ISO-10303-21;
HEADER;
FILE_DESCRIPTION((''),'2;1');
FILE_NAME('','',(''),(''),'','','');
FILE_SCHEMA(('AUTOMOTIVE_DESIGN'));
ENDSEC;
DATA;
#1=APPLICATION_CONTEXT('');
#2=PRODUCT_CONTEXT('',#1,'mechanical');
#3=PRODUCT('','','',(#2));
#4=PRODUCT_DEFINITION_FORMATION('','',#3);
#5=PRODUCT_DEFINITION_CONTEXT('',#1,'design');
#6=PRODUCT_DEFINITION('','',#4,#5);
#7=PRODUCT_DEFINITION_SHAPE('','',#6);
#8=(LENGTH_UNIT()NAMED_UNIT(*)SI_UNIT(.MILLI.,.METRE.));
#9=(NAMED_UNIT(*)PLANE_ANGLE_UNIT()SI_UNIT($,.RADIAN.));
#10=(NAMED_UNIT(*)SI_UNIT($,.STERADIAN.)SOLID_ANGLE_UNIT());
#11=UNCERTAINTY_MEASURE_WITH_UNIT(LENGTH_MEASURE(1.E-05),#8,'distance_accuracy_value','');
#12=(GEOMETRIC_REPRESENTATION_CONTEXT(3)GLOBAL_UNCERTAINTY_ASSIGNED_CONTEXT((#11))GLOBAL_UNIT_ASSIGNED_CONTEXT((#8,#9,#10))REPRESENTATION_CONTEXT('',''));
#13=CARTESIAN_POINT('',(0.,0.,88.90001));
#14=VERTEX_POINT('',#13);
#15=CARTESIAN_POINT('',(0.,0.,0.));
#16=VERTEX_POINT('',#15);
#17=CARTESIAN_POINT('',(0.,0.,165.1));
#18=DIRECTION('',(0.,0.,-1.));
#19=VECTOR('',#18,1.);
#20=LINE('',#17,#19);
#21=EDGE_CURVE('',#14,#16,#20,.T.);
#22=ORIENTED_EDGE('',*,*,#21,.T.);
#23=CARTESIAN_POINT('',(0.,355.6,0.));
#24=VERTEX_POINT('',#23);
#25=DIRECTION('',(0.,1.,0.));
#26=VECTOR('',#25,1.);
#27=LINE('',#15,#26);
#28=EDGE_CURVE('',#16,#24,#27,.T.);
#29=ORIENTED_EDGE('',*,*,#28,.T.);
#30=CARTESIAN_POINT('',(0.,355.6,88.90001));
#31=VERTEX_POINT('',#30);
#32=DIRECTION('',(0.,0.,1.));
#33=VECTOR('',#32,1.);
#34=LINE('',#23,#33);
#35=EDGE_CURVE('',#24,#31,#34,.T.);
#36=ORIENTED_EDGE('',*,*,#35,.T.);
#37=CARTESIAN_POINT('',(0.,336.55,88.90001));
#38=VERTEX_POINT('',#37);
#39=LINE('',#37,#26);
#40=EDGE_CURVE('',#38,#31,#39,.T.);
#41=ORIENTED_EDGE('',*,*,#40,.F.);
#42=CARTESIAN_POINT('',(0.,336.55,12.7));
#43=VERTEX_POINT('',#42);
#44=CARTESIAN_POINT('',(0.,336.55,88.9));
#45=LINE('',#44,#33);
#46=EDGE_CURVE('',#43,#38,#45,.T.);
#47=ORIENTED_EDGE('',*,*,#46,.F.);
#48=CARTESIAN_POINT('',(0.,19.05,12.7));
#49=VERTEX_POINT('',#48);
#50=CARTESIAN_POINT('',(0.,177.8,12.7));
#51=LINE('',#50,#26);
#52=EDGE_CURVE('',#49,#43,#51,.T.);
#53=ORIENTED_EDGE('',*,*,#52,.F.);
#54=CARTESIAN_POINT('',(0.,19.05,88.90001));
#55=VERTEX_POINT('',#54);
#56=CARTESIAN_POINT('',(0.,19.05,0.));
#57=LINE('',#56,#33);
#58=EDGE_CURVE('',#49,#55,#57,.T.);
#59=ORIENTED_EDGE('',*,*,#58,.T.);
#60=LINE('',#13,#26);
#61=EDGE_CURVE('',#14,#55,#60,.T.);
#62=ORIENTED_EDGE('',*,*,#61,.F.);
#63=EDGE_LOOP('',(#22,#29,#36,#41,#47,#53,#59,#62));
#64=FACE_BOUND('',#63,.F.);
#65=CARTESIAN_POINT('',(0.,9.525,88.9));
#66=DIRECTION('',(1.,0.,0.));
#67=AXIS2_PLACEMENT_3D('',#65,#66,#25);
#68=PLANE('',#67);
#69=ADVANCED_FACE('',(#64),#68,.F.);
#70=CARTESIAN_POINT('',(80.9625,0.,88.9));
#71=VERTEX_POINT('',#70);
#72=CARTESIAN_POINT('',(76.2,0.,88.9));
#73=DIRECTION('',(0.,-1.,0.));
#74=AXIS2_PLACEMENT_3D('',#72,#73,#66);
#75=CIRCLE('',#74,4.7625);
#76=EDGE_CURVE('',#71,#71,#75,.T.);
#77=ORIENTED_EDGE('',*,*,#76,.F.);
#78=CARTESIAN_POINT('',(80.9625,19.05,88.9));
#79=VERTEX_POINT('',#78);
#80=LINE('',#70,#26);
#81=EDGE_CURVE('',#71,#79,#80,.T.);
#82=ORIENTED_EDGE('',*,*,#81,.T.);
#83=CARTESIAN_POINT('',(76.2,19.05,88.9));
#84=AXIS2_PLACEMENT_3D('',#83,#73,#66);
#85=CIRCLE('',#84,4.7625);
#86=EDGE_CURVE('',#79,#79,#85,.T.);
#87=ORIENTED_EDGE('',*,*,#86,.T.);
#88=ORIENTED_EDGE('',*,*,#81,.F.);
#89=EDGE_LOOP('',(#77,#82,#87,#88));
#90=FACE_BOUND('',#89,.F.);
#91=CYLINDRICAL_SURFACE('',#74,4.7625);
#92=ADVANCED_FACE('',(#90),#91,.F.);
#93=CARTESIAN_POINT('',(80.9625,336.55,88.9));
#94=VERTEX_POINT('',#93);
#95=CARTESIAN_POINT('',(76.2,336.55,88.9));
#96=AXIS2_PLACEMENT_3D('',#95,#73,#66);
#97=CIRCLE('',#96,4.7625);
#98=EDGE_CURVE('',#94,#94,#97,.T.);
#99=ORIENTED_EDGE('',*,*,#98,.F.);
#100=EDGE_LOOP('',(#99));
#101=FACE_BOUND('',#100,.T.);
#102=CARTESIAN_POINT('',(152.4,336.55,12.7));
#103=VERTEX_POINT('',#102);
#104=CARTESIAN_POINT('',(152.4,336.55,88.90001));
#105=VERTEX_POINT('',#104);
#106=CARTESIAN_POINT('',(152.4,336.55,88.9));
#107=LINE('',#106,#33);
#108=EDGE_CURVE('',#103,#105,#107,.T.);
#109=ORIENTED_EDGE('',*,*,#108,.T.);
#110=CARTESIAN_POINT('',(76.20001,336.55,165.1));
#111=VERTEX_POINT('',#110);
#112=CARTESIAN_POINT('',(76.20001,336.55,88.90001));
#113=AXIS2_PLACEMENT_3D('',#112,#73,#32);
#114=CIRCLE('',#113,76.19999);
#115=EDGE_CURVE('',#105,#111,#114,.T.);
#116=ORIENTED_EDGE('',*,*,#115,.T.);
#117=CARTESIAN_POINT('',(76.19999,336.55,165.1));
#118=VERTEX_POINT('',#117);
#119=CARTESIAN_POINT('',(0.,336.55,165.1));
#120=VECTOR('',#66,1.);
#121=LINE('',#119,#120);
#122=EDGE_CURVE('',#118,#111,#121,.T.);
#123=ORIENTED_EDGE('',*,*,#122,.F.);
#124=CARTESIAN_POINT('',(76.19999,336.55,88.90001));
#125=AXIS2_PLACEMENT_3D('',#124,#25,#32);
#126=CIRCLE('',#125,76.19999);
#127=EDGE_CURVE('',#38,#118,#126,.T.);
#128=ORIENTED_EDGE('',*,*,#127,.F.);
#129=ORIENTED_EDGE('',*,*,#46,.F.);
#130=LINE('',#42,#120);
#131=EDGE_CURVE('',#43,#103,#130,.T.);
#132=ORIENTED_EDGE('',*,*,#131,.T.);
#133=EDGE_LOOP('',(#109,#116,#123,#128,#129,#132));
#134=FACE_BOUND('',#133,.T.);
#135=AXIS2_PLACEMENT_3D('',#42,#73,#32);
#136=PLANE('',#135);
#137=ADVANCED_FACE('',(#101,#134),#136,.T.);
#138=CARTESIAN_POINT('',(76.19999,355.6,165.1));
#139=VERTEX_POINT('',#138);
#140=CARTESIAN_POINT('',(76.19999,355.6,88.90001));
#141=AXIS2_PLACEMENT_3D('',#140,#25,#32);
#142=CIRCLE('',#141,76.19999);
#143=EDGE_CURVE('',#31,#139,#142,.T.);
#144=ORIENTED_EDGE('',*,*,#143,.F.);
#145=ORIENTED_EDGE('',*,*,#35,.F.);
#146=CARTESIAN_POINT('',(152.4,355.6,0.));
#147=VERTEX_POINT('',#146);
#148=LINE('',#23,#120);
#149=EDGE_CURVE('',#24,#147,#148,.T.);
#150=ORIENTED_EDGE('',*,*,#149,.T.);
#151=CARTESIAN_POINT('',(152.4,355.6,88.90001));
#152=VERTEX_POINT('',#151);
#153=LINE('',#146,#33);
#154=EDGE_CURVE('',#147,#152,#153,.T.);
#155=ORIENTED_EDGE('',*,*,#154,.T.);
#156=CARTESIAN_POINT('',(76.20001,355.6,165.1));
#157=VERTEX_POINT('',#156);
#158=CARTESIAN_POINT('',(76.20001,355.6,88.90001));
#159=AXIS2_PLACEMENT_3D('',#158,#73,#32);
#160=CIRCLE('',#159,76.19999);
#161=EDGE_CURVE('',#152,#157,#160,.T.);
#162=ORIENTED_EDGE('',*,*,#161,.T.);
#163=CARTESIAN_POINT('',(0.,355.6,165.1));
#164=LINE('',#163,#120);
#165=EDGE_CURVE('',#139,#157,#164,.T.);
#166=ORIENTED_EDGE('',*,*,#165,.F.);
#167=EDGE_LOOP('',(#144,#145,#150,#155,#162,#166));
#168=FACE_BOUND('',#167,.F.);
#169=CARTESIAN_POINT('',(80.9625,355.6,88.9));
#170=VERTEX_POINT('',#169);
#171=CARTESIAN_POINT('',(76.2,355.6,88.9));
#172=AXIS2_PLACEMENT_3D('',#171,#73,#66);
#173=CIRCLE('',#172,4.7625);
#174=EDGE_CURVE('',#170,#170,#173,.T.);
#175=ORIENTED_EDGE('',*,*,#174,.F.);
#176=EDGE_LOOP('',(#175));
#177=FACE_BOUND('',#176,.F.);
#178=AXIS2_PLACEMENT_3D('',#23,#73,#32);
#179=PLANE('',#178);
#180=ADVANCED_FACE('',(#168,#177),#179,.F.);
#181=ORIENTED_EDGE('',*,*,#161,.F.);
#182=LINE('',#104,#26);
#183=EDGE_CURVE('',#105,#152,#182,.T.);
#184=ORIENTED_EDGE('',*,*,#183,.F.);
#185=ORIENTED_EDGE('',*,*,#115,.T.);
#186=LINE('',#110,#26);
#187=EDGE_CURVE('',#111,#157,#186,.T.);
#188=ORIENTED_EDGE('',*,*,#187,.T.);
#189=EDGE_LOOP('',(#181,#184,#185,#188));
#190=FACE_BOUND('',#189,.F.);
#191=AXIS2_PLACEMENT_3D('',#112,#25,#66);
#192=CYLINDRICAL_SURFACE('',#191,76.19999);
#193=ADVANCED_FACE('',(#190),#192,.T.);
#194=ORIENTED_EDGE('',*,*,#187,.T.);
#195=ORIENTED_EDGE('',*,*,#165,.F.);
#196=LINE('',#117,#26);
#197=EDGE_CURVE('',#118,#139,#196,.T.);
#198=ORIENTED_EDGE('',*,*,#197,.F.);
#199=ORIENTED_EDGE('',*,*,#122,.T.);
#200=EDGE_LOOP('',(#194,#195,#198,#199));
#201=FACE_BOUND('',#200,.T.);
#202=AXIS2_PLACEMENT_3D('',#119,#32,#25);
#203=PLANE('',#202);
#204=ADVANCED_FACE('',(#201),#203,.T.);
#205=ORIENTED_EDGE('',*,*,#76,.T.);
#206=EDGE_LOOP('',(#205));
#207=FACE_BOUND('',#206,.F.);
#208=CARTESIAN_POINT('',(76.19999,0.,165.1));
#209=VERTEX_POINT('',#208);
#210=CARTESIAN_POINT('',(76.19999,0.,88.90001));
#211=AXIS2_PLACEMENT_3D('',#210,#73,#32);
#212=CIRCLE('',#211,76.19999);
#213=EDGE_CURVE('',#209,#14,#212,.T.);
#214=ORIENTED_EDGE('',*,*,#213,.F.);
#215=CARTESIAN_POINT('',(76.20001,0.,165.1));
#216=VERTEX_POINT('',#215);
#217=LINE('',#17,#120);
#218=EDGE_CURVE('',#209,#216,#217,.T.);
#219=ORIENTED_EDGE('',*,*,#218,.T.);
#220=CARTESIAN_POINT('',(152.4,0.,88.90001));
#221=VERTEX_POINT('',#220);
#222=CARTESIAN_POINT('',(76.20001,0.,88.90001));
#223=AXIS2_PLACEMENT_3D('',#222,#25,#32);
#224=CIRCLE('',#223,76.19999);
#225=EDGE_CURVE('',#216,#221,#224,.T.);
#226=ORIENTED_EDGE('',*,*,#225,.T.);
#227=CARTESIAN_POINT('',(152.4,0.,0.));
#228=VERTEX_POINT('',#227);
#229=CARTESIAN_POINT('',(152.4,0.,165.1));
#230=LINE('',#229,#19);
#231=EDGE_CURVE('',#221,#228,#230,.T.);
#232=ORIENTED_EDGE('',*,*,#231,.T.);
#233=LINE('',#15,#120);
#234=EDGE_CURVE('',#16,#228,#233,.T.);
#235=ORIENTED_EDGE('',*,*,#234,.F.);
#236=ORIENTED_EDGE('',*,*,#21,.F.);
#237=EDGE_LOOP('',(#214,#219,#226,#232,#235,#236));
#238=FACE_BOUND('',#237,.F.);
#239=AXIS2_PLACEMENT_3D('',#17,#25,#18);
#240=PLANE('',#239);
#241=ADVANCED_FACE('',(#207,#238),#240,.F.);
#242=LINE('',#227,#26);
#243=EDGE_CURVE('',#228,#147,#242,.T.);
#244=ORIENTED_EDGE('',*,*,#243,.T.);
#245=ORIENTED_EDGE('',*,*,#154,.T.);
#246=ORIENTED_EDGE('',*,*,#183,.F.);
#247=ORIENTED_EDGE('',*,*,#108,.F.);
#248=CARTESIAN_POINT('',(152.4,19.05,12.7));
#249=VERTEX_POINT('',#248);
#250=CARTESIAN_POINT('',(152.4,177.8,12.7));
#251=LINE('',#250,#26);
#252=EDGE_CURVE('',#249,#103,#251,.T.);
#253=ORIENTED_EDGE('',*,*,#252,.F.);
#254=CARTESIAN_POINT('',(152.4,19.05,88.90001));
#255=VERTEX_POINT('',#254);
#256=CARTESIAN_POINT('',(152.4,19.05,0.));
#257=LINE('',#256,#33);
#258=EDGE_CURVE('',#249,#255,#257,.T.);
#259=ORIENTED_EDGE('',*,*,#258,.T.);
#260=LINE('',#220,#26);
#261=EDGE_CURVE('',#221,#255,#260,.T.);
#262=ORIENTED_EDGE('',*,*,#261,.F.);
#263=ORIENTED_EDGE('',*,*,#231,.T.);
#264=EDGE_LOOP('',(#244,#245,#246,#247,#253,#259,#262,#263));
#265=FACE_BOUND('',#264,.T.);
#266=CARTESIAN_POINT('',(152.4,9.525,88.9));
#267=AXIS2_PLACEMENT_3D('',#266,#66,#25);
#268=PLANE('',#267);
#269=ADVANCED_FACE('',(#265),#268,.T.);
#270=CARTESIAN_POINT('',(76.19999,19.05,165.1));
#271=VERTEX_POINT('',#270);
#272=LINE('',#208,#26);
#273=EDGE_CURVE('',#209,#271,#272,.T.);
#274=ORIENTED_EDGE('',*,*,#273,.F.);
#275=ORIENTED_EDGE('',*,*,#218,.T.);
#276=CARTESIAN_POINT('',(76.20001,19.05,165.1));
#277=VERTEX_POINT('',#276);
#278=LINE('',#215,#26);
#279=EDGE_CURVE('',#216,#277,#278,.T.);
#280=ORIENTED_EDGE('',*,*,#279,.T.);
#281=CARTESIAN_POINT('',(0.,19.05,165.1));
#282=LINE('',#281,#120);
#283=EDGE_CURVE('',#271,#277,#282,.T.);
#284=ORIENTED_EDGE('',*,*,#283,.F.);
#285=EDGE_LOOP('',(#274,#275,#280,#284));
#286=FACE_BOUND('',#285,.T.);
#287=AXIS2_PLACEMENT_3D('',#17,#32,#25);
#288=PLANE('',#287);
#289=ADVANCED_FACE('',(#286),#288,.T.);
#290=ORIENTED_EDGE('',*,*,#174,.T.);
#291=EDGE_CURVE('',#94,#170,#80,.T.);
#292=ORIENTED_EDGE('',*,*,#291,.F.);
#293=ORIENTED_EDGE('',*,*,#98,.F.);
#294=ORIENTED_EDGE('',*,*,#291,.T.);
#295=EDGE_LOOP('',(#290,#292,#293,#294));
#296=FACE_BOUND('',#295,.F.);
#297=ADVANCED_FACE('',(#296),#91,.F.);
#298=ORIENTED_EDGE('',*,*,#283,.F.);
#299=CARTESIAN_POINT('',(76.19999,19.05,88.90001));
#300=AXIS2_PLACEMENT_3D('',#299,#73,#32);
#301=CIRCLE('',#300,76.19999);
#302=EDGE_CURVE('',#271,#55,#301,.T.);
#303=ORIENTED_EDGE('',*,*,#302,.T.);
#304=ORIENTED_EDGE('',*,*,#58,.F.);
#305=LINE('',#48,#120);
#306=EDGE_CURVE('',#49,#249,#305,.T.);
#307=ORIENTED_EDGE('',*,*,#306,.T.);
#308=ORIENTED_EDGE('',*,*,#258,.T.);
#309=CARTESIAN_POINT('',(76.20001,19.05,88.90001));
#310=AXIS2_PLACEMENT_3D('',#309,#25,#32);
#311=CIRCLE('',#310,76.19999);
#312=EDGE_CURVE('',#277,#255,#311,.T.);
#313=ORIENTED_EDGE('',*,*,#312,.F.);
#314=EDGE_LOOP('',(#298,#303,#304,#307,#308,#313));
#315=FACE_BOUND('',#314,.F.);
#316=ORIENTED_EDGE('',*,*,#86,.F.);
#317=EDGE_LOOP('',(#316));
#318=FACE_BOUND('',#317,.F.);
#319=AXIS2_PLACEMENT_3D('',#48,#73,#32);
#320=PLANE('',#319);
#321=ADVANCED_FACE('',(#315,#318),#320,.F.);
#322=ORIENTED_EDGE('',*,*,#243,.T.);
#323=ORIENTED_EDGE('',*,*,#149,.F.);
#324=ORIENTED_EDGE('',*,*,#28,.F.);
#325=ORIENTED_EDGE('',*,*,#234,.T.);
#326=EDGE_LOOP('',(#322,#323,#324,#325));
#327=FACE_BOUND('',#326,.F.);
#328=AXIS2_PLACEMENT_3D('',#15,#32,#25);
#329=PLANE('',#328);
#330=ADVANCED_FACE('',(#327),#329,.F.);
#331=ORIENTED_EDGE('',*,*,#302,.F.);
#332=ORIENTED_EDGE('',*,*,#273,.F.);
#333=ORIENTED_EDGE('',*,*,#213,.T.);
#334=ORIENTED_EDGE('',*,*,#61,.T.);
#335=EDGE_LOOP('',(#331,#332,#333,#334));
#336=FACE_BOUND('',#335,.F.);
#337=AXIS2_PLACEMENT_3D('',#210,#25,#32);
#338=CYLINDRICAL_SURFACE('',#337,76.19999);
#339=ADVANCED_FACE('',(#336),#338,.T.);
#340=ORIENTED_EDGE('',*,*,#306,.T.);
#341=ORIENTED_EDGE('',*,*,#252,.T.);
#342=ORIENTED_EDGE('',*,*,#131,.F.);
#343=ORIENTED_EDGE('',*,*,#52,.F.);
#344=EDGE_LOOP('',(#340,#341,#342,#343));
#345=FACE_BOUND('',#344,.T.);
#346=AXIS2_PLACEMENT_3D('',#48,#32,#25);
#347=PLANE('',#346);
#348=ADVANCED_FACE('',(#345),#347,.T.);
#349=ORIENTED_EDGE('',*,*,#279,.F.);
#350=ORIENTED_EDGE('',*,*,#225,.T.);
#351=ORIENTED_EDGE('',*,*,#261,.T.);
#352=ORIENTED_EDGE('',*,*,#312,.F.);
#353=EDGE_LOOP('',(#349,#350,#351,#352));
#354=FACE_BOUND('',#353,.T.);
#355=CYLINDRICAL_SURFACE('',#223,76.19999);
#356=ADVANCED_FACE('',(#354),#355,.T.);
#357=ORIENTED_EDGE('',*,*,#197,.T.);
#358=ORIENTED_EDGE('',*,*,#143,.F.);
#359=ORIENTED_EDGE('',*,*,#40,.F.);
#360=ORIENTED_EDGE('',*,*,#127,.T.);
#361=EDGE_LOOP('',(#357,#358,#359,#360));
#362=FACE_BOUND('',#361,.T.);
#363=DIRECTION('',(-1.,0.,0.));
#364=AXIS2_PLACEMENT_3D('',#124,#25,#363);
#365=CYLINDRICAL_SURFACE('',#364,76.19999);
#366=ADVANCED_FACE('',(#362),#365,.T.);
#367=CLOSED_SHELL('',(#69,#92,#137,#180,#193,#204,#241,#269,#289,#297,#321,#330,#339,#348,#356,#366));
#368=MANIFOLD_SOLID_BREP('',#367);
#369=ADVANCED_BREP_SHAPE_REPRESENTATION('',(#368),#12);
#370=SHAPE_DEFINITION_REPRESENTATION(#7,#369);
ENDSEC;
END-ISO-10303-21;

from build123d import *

# Parameters (mm, degrees)
F0_W     = 19.05
F0_H     = 152.4
F0_H_2   = 12.7
F0_W_2   = 317.5
F1_DEPTH = 152.4
F2_R     = 4.7625
F3_DEPTH = 406.4
F4_R     = 76.19999


# Not quite as in the source:
# - a fillet or chamfer is up to 0.001 mm smaller than in the source, because OpenCascade refuses the exact size


with BuildPart() as f1:
    # F0 (on Right) → F1 (new body)
    with BuildSketch(Plane.YZ):
        with Locations((9.525, 88.9)):
            Rectangle(F0_W, F0_H)
        with Locations((9.525, 6.35)):
            Rectangle(F0_W, F0_H_2)
        with Locations((177.8, 6.35)):
            Rectangle(F0_W_2, F0_H_2)
        with Locations((346.075, 88.9)):
            Rectangle(F0_W, F0_H)
        with Locations((346.075, 6.35)):
            Rectangle(F0_W, F0_H_2)
    extrude(amount=F1_DEPTH)

    # F2 (on Front) → F3 (cut)
    with BuildSketch(Plane.XZ):
        with Locations((76.2, 88.9)):
            Circle(F2_R)
    extrude(amount=-F3_DEPTH, mode=Mode.SUBTRACT)

    # F4 (radius 76.2 in the source; OpenCascade refuses exactly that, so slightly less here)
    f4_edges = [f1.edges().sort_by_distance(p)[0] for p in [
        (152.4, 346.075, 165.1),
        (152.4, 9.525, 165.1),
        (0, 9.525, 165.1),
        (0, 346.075, 165.1),
    ]]
    fillet(f4_edges, radius=F4_R)


solid = f1.part
